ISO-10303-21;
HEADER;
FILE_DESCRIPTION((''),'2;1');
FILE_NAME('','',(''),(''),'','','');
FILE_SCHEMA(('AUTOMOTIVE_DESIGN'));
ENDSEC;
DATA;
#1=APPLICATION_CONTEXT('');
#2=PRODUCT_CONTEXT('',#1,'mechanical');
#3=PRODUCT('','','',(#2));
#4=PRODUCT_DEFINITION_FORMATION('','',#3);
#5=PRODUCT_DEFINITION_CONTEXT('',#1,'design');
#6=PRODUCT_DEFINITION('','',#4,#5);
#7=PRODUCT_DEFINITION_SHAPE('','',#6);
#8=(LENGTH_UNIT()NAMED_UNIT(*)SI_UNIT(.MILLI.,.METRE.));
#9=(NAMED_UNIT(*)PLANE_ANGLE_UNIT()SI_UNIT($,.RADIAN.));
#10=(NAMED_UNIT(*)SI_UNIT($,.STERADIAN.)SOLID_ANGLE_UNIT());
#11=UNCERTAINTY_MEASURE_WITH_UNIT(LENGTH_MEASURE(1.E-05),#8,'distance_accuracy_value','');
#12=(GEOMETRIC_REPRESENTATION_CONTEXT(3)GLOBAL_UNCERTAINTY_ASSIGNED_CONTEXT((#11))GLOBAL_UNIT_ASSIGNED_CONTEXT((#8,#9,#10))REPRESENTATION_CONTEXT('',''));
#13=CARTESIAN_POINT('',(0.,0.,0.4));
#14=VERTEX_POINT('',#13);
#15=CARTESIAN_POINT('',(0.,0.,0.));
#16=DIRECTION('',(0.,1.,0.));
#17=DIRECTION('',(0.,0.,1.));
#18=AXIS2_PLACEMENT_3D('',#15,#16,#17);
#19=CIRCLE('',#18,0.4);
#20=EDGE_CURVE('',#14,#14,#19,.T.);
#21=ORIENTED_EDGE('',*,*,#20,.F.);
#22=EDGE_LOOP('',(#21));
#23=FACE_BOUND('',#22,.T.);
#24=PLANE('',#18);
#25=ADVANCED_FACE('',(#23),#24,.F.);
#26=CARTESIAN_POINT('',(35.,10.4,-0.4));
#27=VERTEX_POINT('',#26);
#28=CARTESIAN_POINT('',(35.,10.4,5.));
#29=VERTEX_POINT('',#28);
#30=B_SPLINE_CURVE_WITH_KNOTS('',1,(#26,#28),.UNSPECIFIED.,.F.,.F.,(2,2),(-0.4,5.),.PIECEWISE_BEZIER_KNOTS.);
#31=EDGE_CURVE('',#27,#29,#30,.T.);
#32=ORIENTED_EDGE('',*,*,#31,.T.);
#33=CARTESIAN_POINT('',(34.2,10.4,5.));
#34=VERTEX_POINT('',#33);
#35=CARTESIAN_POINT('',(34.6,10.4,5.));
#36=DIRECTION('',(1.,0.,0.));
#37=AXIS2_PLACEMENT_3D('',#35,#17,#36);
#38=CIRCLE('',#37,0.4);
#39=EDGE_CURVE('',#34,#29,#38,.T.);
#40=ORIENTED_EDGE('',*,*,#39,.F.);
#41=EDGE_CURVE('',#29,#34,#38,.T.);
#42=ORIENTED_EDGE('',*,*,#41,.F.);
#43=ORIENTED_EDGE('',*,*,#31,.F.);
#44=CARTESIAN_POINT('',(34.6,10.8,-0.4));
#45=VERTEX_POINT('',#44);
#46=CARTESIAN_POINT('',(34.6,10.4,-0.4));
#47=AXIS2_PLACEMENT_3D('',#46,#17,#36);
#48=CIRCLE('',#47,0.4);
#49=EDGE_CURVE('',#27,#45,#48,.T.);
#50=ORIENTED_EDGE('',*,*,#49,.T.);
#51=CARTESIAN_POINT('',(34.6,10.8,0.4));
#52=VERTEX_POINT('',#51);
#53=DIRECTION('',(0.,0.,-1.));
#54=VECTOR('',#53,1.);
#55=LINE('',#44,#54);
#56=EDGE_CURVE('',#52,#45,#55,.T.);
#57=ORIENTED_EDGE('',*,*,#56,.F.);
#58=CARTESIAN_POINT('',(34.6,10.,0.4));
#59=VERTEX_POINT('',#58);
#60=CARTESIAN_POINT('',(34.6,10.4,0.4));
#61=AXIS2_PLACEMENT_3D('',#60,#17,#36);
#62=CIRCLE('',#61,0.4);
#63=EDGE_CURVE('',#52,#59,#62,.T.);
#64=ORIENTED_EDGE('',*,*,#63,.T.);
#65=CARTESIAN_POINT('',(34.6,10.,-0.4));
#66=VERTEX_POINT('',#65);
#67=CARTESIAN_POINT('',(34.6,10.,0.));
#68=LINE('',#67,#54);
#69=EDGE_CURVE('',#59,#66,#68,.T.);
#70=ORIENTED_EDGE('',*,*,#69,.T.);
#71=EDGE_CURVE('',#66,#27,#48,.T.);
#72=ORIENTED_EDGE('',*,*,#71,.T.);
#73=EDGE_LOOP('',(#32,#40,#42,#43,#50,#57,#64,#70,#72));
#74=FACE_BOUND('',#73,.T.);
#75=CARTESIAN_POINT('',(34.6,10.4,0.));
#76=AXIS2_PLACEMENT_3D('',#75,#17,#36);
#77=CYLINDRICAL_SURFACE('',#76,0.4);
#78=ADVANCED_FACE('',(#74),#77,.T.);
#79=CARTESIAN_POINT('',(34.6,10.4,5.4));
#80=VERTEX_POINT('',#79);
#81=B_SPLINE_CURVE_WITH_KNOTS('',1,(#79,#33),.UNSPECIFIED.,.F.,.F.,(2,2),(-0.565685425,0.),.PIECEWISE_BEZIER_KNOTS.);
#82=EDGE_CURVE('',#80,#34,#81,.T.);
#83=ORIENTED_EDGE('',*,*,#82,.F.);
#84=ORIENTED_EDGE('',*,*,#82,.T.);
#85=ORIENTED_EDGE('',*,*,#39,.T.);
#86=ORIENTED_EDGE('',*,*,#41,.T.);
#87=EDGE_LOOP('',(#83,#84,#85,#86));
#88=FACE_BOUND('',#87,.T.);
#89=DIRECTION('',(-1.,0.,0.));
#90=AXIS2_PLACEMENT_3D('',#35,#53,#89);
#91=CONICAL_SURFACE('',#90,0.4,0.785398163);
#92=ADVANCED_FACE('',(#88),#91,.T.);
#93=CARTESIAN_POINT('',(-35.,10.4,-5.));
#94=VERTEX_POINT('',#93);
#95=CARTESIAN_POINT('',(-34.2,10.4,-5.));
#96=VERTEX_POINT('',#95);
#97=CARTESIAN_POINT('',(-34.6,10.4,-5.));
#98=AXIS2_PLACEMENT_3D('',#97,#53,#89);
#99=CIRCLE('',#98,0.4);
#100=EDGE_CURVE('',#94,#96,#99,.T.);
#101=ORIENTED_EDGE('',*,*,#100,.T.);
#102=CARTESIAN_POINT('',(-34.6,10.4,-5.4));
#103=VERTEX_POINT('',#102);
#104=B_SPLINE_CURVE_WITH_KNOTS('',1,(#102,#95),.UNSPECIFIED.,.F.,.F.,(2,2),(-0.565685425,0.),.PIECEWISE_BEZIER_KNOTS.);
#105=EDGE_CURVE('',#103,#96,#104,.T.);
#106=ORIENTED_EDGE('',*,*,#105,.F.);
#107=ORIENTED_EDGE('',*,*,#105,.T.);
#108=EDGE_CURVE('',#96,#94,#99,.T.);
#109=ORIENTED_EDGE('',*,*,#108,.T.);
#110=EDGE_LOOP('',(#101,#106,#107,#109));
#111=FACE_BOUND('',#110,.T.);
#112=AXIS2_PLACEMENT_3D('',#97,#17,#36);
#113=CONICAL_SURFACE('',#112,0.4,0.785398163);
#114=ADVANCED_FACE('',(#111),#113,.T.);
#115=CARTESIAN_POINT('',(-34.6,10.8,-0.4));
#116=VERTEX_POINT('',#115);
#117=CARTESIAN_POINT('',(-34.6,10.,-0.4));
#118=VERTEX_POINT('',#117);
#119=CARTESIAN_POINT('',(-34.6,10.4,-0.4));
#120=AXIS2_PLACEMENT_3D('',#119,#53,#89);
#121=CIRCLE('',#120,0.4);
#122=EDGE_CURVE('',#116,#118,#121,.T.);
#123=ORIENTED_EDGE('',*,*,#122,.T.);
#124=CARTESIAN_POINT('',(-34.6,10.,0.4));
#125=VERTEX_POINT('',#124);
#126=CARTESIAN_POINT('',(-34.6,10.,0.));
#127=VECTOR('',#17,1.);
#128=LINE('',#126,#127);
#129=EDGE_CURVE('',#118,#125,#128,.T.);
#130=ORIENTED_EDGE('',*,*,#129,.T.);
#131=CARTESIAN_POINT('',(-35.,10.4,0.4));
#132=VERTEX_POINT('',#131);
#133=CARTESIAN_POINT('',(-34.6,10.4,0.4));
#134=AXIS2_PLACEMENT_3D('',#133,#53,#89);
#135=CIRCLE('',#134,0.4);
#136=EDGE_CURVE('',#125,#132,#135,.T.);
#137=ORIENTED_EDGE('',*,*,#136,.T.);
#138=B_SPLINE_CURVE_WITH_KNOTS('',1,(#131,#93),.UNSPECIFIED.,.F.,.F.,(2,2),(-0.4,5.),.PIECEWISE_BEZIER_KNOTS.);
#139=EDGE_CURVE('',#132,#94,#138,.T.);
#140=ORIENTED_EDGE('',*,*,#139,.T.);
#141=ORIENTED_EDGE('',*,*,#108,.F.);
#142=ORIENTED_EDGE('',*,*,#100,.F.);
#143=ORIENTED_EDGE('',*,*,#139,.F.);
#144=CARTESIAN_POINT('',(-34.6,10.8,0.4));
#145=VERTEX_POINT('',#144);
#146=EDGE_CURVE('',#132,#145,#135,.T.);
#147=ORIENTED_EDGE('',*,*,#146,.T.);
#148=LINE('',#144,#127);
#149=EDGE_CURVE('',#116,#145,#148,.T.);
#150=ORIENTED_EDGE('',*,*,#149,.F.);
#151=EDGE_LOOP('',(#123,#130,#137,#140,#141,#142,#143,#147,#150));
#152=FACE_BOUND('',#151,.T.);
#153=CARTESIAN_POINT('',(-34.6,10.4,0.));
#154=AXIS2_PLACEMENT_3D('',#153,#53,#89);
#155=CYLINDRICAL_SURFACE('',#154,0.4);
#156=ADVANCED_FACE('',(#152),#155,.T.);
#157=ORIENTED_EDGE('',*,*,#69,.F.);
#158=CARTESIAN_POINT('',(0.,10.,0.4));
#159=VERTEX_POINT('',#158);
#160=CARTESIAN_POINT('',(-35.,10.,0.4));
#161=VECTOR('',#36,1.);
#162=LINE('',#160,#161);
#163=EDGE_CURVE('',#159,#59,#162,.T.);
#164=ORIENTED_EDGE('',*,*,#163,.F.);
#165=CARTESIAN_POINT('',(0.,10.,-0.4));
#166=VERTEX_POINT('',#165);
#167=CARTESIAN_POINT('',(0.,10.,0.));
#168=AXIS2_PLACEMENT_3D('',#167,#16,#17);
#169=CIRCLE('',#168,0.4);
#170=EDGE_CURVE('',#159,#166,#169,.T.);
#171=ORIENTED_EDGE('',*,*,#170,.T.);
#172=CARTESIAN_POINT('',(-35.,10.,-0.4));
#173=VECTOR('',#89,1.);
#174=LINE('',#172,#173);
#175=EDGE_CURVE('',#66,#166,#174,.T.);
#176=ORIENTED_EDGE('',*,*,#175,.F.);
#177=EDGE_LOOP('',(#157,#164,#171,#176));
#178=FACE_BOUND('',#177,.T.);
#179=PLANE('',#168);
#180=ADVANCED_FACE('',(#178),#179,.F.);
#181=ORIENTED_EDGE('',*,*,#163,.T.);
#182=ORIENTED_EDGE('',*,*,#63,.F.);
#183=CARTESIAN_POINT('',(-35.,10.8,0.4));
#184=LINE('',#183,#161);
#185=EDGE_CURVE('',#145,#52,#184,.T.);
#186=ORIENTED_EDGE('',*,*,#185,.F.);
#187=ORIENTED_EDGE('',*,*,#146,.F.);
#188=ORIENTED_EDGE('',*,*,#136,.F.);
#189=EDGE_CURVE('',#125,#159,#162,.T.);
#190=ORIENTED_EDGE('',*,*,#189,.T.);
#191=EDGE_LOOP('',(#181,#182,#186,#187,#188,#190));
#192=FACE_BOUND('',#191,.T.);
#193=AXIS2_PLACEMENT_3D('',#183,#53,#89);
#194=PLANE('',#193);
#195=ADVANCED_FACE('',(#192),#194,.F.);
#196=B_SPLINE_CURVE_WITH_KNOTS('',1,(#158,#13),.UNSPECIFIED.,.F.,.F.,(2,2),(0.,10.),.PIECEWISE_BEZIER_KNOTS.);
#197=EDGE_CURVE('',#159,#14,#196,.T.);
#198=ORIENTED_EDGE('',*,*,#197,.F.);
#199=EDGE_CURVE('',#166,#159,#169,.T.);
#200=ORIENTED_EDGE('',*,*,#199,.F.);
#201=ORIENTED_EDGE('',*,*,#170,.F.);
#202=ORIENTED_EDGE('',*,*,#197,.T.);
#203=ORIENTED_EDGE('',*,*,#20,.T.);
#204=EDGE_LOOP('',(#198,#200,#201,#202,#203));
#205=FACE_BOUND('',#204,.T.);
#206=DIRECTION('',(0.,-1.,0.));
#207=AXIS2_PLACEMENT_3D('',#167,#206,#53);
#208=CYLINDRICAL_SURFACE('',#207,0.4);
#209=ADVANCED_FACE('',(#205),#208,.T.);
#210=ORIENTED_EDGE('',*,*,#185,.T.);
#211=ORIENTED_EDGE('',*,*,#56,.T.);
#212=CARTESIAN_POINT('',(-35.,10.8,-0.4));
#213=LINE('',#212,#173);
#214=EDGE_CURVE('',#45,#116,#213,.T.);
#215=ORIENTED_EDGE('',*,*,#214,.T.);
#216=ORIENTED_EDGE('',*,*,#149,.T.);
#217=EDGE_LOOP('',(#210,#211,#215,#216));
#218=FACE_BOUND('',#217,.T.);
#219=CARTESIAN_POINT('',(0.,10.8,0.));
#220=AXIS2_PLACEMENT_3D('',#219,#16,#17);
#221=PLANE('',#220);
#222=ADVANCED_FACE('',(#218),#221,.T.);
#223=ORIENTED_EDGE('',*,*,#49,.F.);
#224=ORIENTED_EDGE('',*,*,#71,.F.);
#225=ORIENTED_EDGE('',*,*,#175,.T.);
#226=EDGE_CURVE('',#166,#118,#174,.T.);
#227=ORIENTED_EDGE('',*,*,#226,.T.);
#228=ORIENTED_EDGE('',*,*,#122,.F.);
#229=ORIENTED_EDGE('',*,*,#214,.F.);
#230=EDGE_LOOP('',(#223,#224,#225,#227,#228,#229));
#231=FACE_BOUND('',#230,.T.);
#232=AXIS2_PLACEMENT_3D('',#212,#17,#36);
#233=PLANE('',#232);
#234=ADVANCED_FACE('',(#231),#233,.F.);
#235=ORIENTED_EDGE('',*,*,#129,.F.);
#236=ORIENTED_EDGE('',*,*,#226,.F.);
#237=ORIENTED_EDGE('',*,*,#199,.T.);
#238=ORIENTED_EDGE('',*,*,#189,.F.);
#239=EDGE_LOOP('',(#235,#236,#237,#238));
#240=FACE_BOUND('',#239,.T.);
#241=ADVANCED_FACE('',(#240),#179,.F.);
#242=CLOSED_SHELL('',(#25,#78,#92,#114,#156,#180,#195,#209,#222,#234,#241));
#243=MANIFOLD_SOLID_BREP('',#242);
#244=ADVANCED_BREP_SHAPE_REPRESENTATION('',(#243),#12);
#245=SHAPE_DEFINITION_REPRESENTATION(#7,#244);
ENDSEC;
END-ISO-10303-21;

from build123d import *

# Parameters (mm, degrees)
SKETCH_1_R      = 0.4
EXTRUDE_1_DEPTH = 10
SKETCH_2_W      = 70
SKETCH_2_H      = 0.8
EXTRUDE_2_DEPTH = 0.8
FILLET_1_R      = 0.4
SKETCH_3_R      = 0.4
EXTRUDE_3_DEPTH = 5
SKETCH_4_R      = 0.4
EXTRUDE_4_DEPTH = 5
CHAMFER_1_SIZE  = 0.4


with BuildPart() as part:
    # 草图1 → 凸台-拉伸1 (new body)
    with BuildSketch(Plane(origin=(0, 0, 0), x_dir=(1, 0, 0), z_dir=(0, 1, 0))):
        with Locations(Location((0, 0, 0), (0, 0, 270))):
            Circle(SKETCH_1_R)
    extrude(amount=EXTRUDE_1_DEPTH)

    # 草图2 → 凸台-拉伸2 (add)
    with BuildSketch(Plane(origin=(0, 10, 0), x_dir=(1, 0, 0), z_dir=(0, 1, 0))):
        Rectangle(SKETCH_2_W, SKETCH_2_H)
    extrude(amount=EXTRUDE_2_DEPTH)

    # 圆角1
    fillet_1_edges = [part.edges().sort_by_distance(p)[0] for p in [
        (35, 10, 0),
        (35, 10.8, 0),
        (-35, 10, 0),
        (-35, 10.8, 0),
    ]]
    fillet(fillet_1_edges, radius=FILLET_1_R - 0.0001)  # a hair under: the kernel refuses the full size

    # 草图3 → 凸台-拉伸3 (add)
    with BuildSketch(Plane.XY.offset(0.4)):
        with Locations((34.6, 10.4)):
            Circle(SKETCH_3_R)
    extrude(amount=EXTRUDE_3_DEPTH)

    # 草图4 → 凸台-拉伸4 (add)
    with BuildSketch(Plane(origin=(0, 0, -0.4), x_dir=(-1, 0, 0), z_dir=(0, 0, -1))):
        with Locations((34.6, 10.4)):
            Circle(SKETCH_4_R)
    extrude(amount=EXTRUDE_4_DEPTH)

    # 倒角1
    chamfer_1_edges = [part.edges().sort_by_distance(p)[0] for p in [
        (34.2, 10.4, 5.4),
        (-34.2, 10.4, -5.4),
    ]]
    chamfer(chamfer_1_edges, length=CHAMFER_1_SIZE - 0.0001)  # a hair under: the kernel refuses the full size


solid = part.part
